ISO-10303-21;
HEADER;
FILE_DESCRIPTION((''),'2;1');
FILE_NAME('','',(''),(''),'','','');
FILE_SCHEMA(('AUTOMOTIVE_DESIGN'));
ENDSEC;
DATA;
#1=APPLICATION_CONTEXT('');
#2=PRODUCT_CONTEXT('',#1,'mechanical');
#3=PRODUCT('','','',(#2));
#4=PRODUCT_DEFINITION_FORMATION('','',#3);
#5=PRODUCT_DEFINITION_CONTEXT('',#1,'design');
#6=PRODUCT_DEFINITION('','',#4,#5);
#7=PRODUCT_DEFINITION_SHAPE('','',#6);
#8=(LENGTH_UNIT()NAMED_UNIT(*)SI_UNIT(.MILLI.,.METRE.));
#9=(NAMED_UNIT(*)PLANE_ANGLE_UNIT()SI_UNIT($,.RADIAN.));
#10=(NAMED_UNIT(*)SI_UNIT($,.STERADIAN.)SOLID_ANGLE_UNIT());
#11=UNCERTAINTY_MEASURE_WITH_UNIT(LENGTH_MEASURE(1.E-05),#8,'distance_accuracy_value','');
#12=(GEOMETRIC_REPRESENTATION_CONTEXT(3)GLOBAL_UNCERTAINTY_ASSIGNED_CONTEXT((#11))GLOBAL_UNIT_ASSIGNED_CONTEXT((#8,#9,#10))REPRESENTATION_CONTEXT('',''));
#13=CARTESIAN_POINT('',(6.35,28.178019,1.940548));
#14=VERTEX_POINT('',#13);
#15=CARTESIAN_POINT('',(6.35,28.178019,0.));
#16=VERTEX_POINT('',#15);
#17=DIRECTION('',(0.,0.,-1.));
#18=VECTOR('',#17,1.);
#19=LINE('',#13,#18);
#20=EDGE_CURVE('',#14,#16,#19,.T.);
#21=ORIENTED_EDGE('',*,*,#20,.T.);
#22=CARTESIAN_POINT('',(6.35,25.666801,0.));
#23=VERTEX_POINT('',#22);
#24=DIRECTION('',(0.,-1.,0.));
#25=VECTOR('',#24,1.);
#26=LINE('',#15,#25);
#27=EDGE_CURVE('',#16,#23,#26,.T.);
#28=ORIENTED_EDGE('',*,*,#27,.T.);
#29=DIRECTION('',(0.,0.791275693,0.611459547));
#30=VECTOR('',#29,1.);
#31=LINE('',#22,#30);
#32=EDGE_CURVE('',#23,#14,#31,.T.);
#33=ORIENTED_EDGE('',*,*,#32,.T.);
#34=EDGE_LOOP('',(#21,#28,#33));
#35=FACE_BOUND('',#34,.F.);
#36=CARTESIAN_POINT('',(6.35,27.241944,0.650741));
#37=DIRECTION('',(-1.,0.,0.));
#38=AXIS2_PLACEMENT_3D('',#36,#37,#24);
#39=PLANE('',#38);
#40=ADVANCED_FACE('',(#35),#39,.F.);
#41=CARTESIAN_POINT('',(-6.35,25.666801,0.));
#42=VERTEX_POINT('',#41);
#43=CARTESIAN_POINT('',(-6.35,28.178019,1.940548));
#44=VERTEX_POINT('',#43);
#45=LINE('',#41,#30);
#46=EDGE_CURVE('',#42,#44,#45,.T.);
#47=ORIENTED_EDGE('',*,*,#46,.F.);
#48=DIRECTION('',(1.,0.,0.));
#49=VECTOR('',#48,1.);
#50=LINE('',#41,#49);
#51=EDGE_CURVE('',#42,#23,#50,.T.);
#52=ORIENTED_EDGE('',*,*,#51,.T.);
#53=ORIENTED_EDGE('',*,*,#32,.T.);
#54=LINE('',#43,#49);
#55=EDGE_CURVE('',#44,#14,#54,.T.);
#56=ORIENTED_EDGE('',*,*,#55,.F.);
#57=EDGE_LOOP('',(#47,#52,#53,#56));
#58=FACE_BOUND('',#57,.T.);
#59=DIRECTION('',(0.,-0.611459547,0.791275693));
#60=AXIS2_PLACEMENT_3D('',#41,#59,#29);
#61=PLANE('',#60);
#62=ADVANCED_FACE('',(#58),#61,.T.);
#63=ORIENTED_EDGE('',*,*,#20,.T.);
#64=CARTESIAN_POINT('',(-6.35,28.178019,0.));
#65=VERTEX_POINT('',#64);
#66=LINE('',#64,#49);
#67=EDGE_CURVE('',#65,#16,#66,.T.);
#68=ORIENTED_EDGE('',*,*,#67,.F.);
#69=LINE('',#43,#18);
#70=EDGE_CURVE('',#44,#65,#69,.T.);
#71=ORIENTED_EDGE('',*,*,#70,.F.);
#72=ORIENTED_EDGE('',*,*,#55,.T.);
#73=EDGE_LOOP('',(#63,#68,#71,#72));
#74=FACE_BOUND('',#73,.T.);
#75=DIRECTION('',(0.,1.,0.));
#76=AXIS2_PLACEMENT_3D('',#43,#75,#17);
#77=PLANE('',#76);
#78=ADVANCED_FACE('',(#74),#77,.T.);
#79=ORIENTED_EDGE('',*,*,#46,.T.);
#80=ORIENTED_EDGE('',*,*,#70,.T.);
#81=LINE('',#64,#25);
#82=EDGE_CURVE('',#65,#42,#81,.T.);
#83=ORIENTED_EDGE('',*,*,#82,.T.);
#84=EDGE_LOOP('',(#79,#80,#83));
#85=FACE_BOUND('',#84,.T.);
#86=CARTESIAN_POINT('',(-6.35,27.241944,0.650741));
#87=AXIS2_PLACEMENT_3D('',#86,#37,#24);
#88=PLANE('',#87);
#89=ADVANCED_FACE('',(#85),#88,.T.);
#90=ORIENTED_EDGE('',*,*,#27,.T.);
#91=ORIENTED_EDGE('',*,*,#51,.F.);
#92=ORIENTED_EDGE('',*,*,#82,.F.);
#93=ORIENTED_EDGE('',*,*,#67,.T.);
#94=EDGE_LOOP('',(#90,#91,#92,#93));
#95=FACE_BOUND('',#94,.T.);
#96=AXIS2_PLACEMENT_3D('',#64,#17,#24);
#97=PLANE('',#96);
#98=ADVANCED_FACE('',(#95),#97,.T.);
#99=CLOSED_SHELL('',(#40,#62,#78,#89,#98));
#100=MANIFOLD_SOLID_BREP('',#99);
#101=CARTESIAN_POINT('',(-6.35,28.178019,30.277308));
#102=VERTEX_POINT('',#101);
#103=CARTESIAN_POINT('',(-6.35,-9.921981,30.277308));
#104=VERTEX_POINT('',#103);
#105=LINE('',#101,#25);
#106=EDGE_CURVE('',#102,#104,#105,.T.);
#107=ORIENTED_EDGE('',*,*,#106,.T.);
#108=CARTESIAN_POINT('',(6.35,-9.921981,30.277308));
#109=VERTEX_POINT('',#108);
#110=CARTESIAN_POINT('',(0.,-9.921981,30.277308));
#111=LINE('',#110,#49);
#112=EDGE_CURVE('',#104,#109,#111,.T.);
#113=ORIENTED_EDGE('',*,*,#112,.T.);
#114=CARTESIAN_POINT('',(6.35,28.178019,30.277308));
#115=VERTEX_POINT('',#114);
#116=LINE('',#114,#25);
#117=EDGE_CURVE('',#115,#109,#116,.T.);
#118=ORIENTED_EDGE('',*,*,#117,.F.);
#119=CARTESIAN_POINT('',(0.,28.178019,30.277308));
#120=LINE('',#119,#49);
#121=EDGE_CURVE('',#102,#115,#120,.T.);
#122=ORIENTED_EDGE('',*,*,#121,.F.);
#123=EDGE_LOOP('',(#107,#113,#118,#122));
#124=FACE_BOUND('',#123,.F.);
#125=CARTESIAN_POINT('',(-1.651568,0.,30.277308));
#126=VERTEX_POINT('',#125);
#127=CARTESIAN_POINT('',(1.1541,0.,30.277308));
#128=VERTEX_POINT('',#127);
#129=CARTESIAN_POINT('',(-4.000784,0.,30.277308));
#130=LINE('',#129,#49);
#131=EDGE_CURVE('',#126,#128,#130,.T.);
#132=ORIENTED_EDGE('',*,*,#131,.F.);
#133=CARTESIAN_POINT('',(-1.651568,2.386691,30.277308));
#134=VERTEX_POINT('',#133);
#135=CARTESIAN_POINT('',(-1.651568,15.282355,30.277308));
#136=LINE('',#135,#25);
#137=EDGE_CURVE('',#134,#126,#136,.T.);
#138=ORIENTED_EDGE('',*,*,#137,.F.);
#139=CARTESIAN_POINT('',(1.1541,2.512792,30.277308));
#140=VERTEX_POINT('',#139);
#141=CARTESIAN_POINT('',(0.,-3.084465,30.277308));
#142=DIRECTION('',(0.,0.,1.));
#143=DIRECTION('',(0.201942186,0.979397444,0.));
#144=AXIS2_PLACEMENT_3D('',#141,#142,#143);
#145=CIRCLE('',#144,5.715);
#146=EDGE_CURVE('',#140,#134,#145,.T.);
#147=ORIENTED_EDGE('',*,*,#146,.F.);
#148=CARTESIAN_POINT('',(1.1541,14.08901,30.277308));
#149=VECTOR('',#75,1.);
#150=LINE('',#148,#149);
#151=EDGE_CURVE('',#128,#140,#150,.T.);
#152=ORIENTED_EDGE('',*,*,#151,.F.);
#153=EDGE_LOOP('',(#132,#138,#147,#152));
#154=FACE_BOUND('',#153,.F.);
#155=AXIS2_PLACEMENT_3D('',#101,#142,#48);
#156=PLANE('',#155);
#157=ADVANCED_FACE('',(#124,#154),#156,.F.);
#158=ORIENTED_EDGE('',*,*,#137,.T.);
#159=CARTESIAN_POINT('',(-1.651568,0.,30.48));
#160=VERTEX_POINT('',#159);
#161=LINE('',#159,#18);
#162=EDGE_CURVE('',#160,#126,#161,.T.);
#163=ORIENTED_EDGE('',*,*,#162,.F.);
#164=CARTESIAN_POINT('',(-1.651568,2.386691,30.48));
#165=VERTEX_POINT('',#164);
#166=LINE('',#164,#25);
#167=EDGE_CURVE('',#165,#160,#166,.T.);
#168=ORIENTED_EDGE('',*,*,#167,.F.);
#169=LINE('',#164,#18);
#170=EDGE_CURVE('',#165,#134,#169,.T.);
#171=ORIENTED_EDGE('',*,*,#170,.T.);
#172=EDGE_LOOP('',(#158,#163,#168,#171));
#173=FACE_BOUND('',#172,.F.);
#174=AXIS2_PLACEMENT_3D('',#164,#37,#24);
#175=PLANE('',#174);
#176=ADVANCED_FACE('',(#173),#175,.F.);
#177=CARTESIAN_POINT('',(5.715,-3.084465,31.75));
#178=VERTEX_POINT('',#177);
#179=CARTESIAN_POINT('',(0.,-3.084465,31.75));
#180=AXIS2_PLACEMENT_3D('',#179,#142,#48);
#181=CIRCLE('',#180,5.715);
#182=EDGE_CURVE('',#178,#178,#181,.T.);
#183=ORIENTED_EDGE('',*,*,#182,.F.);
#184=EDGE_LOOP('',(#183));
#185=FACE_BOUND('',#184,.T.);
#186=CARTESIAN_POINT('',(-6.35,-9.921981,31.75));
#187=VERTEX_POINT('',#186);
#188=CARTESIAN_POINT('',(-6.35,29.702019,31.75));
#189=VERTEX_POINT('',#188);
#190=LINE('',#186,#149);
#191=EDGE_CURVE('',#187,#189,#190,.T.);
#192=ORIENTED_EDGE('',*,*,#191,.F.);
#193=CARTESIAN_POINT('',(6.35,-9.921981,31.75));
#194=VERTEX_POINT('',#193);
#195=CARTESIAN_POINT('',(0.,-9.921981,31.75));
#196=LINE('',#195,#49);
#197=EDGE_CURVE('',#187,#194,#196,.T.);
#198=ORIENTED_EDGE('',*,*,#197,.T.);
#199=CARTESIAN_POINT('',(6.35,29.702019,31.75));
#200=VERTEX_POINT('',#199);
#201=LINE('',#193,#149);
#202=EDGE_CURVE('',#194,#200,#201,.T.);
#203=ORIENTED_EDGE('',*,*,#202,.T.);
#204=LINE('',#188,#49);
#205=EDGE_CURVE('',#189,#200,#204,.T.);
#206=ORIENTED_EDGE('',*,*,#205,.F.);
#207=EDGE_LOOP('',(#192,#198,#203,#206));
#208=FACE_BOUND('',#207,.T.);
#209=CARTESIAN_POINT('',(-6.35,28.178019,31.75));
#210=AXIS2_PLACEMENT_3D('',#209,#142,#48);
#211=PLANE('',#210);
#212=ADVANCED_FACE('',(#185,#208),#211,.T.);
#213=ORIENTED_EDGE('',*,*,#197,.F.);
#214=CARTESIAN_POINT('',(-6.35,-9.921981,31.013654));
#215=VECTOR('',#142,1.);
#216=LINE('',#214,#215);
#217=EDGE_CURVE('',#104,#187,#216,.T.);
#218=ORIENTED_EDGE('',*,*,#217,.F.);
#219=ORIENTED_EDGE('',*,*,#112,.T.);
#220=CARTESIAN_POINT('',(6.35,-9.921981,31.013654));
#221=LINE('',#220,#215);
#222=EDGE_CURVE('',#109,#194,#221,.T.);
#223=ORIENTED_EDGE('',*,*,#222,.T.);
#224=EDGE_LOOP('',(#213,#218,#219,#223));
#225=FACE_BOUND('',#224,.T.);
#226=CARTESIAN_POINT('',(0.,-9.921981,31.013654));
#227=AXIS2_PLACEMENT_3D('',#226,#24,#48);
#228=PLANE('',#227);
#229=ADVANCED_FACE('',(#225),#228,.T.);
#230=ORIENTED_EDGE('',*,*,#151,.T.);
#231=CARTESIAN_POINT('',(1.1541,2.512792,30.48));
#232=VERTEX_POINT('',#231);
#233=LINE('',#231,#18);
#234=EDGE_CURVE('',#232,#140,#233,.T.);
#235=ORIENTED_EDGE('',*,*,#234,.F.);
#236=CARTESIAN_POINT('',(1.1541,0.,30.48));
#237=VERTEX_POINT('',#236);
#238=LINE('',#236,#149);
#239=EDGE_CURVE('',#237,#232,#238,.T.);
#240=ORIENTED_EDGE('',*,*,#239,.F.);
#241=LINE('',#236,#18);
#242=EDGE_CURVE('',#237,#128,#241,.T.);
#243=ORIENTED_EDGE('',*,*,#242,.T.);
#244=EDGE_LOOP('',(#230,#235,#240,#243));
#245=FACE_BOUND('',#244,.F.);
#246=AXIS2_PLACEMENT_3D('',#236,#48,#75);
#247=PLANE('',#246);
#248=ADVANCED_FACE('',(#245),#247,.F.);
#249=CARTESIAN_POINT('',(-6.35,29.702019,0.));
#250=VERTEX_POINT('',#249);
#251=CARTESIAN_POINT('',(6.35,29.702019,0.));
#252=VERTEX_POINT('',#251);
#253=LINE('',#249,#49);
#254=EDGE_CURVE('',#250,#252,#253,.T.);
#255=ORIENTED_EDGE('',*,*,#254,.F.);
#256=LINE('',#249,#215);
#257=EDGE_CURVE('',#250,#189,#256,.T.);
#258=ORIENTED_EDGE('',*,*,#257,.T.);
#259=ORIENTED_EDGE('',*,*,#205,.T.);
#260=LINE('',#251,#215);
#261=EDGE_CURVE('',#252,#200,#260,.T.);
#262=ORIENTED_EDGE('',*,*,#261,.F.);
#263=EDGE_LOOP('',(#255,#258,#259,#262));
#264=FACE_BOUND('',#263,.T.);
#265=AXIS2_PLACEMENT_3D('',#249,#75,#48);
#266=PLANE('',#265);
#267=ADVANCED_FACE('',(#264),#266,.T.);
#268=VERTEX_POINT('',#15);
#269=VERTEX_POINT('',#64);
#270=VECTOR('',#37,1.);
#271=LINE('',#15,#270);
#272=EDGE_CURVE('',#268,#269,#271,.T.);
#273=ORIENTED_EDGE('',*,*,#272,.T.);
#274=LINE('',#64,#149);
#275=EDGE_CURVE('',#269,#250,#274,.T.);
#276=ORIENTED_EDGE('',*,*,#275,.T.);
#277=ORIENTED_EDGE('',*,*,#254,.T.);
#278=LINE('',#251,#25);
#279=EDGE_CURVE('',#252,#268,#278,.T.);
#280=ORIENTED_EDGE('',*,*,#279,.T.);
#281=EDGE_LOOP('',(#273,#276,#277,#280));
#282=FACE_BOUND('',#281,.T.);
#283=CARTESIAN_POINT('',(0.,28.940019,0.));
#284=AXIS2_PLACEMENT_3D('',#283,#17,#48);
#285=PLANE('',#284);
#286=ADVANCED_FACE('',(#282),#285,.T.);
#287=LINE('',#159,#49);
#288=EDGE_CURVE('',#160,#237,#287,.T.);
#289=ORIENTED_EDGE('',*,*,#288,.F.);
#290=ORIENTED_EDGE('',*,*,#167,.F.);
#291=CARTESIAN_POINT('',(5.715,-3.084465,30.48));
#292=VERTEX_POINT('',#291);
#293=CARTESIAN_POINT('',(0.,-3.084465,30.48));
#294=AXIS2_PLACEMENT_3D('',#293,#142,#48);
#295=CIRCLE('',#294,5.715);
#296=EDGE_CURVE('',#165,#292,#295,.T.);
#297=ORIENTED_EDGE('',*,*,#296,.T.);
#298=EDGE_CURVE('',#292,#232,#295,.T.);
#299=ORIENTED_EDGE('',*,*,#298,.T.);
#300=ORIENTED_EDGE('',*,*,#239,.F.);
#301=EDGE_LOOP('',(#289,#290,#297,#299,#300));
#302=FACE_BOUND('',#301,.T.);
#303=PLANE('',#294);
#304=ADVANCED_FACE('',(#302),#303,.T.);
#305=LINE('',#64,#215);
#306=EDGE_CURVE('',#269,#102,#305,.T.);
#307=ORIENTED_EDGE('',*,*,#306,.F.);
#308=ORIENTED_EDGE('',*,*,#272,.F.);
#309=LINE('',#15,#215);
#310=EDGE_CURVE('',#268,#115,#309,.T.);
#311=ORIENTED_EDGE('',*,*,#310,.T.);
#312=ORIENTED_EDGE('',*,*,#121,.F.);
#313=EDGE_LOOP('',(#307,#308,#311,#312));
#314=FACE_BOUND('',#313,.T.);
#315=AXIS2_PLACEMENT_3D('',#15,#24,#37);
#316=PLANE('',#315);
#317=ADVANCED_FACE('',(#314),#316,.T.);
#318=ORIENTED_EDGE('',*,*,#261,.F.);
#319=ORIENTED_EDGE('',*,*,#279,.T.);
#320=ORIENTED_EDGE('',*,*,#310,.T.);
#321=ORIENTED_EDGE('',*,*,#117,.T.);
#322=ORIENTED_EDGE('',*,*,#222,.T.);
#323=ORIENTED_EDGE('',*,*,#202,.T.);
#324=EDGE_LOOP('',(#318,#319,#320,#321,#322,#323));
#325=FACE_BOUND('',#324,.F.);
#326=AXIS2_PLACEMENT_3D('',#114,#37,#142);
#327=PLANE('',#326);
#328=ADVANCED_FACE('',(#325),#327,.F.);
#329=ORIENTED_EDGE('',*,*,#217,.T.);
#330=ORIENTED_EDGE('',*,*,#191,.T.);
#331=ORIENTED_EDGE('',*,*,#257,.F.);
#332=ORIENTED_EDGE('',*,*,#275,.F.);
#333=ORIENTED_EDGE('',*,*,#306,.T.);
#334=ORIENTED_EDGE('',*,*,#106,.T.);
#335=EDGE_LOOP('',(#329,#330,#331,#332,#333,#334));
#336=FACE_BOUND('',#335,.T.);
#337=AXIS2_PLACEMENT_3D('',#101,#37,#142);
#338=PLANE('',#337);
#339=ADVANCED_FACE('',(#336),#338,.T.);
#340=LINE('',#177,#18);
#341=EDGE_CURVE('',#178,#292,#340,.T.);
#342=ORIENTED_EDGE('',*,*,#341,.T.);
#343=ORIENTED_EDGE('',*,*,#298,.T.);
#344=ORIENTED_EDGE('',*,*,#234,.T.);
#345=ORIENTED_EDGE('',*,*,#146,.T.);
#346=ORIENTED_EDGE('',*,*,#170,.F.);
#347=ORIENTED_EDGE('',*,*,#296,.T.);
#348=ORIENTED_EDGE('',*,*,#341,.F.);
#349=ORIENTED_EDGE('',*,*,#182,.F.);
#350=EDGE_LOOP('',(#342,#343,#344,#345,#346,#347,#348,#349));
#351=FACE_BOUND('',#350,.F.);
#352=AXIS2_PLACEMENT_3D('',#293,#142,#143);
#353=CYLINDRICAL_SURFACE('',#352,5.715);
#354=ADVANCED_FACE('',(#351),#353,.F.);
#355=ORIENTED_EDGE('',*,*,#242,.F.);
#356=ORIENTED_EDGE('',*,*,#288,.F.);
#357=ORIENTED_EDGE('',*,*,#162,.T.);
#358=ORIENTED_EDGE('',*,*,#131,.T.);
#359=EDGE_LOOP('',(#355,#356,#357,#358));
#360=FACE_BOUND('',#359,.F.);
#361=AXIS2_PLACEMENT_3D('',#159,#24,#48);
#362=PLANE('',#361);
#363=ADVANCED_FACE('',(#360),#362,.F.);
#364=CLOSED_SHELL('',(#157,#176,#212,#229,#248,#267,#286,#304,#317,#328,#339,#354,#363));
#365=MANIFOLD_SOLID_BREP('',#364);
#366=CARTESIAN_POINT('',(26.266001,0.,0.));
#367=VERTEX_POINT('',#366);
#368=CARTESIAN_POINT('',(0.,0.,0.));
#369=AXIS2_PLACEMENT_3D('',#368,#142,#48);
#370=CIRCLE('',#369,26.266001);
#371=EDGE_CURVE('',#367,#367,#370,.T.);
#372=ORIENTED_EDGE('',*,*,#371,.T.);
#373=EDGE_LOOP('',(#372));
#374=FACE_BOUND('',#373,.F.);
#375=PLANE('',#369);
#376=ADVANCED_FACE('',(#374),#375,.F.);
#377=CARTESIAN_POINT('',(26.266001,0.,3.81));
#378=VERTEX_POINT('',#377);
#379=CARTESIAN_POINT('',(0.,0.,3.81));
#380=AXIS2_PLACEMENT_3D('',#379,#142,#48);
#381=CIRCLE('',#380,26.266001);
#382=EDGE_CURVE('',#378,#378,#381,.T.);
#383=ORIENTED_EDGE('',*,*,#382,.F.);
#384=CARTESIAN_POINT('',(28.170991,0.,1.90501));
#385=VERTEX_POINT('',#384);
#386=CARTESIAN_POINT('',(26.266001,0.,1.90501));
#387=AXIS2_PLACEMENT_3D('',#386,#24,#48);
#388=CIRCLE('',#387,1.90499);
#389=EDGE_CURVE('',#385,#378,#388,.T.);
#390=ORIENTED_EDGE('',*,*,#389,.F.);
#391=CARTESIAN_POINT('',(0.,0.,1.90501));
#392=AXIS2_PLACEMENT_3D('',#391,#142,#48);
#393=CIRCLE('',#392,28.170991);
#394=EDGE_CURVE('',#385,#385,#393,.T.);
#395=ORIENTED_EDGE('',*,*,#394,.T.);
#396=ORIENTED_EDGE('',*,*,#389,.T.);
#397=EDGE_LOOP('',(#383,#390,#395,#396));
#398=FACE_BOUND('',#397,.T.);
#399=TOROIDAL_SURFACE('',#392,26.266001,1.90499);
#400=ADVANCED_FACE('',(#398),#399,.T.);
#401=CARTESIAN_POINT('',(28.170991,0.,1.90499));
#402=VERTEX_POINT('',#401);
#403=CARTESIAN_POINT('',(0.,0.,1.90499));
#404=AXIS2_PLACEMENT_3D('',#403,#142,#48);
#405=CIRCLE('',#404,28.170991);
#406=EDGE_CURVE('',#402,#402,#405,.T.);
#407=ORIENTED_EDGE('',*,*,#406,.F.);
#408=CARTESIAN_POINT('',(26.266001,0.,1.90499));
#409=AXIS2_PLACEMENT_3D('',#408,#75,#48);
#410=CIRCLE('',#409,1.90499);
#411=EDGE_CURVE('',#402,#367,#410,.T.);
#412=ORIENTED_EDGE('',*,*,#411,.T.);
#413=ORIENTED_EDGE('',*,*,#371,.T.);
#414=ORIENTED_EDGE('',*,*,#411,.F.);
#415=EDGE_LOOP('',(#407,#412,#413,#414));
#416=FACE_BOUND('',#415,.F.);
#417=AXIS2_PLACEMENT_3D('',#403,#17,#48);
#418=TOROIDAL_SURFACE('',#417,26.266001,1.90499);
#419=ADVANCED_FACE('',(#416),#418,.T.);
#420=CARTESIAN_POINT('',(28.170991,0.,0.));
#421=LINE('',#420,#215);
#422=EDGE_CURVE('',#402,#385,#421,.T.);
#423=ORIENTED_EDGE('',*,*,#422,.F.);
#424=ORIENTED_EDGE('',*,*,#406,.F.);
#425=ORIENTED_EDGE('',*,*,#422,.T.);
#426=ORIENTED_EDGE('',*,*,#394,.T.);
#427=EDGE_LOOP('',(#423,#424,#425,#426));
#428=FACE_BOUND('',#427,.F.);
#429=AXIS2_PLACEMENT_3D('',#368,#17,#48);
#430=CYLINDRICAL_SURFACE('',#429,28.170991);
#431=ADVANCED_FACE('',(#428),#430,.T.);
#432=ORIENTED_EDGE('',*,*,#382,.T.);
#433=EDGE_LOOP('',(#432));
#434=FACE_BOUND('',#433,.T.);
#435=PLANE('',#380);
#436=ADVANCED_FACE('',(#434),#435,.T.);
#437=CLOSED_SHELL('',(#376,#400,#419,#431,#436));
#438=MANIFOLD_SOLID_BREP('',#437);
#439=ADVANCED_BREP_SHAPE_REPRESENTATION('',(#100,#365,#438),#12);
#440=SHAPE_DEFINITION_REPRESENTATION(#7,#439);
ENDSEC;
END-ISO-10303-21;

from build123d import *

# Parameters (mm, degrees)
F0_R      = 28.1709911247
F1_DEPTH  = 3.81
F2_R      = 1.90499
F4_DEPTH  = 31.75
F5_W      = 12.7
F5_H      = 1.4726919234
F6_DEPTH  = 38.1
F8_DEPTH  = 12.7
F9_R      = 5.715
F10_DEPTH = 1.27
F12_DEPTH = 25.4


# Not quite as in the source:
# - a fillet or chamfer is up to 0.001 mm smaller than in the source, because OpenCascade refuses the exact size


with BuildPart() as f1:
    # F0 (on Top) → F1 (new body)
    with BuildSketch(Plane.XY):
        Circle(F0_R)
    extrude(amount=F1_DEPTH)

    # F2 (radius 1.905 in the source; OpenCascade refuses exactly that, so slightly less here)
    f2_edges = [f1.edges().sort_by_distance(p)[0] for p in [
        (-28.170991, 0, 3.81),
        (-28.170991, 0, 0),
    ]]
    fillet(f2_edges, radius=F2_R)


with BuildPart() as f4:
    # F3 (on face) → F4 (new body)
    with BuildSketch(Plane(origin=(0, 0, 0), x_dir=(1, 0, 0), z_dir=(0, 0, -1))):
        Polygon((6.35, -28.1780194491), (0, -28.1780194491), (-6.35, -28.1780194491), (-6.35, -29.7020194491), (6.35, -29.7020194491), align=None)
    extrude(amount=-F4_DEPTH)

    # F5 (on face) → F6 (join)
    with BuildSketch(Plane.XZ.offset(-28.1780194491)):
        with Locations((0, 31.0136540383)):
            Rectangle(F5_W, F5_H)
    extrude(amount=F6_DEPTH)

    # F9 (on face) → F10 (cut)
    with BuildSketch(Plane.XY.offset(31.75)):
        with Locations((0, -3.0844647083)):
            Circle(F9_R)
    extrude(amount=-F10_DEPTH, mode=Mode.SUBTRACT)

    # F11 (on face) → F12 (cut)
    with BuildSketch(Plane.XY.offset(30.48)):
        with BuildLine():
            ThreePointArc((1.1540995911, 2.5127916851), (-0.2566010446, 2.6247717471), (-1.6515682438, 2.3866912332))
            Line((-1.6515682438, 2.3866912332), (-1.6515682438, 0))
            Line((-1.6515682438, 0), (1.1540995911, 0))
            Line((1.1540995911, 0), (1.1540995911, 2.5127916851))
        make_face()
    extrude(amount=-F12_DEPTH, mode=Mode.SUBTRACT)


with BuildPart() as f8:
    # F7 (on face) → F8 (new body)
    with BuildSketch(Plane(origin=(-6.35, 0, 0), x_dir=(0, -1, 0), z_dir=(-1, 0, 0))):
        Polygon((-28.1780194491, 1.9405478379), (-28.1780194491, 0), (-25.6668012589, 0), align=None)
    extrude(amount=-F8_DEPTH)


solid = Compound([f1.part, f4.part, f8.part])
